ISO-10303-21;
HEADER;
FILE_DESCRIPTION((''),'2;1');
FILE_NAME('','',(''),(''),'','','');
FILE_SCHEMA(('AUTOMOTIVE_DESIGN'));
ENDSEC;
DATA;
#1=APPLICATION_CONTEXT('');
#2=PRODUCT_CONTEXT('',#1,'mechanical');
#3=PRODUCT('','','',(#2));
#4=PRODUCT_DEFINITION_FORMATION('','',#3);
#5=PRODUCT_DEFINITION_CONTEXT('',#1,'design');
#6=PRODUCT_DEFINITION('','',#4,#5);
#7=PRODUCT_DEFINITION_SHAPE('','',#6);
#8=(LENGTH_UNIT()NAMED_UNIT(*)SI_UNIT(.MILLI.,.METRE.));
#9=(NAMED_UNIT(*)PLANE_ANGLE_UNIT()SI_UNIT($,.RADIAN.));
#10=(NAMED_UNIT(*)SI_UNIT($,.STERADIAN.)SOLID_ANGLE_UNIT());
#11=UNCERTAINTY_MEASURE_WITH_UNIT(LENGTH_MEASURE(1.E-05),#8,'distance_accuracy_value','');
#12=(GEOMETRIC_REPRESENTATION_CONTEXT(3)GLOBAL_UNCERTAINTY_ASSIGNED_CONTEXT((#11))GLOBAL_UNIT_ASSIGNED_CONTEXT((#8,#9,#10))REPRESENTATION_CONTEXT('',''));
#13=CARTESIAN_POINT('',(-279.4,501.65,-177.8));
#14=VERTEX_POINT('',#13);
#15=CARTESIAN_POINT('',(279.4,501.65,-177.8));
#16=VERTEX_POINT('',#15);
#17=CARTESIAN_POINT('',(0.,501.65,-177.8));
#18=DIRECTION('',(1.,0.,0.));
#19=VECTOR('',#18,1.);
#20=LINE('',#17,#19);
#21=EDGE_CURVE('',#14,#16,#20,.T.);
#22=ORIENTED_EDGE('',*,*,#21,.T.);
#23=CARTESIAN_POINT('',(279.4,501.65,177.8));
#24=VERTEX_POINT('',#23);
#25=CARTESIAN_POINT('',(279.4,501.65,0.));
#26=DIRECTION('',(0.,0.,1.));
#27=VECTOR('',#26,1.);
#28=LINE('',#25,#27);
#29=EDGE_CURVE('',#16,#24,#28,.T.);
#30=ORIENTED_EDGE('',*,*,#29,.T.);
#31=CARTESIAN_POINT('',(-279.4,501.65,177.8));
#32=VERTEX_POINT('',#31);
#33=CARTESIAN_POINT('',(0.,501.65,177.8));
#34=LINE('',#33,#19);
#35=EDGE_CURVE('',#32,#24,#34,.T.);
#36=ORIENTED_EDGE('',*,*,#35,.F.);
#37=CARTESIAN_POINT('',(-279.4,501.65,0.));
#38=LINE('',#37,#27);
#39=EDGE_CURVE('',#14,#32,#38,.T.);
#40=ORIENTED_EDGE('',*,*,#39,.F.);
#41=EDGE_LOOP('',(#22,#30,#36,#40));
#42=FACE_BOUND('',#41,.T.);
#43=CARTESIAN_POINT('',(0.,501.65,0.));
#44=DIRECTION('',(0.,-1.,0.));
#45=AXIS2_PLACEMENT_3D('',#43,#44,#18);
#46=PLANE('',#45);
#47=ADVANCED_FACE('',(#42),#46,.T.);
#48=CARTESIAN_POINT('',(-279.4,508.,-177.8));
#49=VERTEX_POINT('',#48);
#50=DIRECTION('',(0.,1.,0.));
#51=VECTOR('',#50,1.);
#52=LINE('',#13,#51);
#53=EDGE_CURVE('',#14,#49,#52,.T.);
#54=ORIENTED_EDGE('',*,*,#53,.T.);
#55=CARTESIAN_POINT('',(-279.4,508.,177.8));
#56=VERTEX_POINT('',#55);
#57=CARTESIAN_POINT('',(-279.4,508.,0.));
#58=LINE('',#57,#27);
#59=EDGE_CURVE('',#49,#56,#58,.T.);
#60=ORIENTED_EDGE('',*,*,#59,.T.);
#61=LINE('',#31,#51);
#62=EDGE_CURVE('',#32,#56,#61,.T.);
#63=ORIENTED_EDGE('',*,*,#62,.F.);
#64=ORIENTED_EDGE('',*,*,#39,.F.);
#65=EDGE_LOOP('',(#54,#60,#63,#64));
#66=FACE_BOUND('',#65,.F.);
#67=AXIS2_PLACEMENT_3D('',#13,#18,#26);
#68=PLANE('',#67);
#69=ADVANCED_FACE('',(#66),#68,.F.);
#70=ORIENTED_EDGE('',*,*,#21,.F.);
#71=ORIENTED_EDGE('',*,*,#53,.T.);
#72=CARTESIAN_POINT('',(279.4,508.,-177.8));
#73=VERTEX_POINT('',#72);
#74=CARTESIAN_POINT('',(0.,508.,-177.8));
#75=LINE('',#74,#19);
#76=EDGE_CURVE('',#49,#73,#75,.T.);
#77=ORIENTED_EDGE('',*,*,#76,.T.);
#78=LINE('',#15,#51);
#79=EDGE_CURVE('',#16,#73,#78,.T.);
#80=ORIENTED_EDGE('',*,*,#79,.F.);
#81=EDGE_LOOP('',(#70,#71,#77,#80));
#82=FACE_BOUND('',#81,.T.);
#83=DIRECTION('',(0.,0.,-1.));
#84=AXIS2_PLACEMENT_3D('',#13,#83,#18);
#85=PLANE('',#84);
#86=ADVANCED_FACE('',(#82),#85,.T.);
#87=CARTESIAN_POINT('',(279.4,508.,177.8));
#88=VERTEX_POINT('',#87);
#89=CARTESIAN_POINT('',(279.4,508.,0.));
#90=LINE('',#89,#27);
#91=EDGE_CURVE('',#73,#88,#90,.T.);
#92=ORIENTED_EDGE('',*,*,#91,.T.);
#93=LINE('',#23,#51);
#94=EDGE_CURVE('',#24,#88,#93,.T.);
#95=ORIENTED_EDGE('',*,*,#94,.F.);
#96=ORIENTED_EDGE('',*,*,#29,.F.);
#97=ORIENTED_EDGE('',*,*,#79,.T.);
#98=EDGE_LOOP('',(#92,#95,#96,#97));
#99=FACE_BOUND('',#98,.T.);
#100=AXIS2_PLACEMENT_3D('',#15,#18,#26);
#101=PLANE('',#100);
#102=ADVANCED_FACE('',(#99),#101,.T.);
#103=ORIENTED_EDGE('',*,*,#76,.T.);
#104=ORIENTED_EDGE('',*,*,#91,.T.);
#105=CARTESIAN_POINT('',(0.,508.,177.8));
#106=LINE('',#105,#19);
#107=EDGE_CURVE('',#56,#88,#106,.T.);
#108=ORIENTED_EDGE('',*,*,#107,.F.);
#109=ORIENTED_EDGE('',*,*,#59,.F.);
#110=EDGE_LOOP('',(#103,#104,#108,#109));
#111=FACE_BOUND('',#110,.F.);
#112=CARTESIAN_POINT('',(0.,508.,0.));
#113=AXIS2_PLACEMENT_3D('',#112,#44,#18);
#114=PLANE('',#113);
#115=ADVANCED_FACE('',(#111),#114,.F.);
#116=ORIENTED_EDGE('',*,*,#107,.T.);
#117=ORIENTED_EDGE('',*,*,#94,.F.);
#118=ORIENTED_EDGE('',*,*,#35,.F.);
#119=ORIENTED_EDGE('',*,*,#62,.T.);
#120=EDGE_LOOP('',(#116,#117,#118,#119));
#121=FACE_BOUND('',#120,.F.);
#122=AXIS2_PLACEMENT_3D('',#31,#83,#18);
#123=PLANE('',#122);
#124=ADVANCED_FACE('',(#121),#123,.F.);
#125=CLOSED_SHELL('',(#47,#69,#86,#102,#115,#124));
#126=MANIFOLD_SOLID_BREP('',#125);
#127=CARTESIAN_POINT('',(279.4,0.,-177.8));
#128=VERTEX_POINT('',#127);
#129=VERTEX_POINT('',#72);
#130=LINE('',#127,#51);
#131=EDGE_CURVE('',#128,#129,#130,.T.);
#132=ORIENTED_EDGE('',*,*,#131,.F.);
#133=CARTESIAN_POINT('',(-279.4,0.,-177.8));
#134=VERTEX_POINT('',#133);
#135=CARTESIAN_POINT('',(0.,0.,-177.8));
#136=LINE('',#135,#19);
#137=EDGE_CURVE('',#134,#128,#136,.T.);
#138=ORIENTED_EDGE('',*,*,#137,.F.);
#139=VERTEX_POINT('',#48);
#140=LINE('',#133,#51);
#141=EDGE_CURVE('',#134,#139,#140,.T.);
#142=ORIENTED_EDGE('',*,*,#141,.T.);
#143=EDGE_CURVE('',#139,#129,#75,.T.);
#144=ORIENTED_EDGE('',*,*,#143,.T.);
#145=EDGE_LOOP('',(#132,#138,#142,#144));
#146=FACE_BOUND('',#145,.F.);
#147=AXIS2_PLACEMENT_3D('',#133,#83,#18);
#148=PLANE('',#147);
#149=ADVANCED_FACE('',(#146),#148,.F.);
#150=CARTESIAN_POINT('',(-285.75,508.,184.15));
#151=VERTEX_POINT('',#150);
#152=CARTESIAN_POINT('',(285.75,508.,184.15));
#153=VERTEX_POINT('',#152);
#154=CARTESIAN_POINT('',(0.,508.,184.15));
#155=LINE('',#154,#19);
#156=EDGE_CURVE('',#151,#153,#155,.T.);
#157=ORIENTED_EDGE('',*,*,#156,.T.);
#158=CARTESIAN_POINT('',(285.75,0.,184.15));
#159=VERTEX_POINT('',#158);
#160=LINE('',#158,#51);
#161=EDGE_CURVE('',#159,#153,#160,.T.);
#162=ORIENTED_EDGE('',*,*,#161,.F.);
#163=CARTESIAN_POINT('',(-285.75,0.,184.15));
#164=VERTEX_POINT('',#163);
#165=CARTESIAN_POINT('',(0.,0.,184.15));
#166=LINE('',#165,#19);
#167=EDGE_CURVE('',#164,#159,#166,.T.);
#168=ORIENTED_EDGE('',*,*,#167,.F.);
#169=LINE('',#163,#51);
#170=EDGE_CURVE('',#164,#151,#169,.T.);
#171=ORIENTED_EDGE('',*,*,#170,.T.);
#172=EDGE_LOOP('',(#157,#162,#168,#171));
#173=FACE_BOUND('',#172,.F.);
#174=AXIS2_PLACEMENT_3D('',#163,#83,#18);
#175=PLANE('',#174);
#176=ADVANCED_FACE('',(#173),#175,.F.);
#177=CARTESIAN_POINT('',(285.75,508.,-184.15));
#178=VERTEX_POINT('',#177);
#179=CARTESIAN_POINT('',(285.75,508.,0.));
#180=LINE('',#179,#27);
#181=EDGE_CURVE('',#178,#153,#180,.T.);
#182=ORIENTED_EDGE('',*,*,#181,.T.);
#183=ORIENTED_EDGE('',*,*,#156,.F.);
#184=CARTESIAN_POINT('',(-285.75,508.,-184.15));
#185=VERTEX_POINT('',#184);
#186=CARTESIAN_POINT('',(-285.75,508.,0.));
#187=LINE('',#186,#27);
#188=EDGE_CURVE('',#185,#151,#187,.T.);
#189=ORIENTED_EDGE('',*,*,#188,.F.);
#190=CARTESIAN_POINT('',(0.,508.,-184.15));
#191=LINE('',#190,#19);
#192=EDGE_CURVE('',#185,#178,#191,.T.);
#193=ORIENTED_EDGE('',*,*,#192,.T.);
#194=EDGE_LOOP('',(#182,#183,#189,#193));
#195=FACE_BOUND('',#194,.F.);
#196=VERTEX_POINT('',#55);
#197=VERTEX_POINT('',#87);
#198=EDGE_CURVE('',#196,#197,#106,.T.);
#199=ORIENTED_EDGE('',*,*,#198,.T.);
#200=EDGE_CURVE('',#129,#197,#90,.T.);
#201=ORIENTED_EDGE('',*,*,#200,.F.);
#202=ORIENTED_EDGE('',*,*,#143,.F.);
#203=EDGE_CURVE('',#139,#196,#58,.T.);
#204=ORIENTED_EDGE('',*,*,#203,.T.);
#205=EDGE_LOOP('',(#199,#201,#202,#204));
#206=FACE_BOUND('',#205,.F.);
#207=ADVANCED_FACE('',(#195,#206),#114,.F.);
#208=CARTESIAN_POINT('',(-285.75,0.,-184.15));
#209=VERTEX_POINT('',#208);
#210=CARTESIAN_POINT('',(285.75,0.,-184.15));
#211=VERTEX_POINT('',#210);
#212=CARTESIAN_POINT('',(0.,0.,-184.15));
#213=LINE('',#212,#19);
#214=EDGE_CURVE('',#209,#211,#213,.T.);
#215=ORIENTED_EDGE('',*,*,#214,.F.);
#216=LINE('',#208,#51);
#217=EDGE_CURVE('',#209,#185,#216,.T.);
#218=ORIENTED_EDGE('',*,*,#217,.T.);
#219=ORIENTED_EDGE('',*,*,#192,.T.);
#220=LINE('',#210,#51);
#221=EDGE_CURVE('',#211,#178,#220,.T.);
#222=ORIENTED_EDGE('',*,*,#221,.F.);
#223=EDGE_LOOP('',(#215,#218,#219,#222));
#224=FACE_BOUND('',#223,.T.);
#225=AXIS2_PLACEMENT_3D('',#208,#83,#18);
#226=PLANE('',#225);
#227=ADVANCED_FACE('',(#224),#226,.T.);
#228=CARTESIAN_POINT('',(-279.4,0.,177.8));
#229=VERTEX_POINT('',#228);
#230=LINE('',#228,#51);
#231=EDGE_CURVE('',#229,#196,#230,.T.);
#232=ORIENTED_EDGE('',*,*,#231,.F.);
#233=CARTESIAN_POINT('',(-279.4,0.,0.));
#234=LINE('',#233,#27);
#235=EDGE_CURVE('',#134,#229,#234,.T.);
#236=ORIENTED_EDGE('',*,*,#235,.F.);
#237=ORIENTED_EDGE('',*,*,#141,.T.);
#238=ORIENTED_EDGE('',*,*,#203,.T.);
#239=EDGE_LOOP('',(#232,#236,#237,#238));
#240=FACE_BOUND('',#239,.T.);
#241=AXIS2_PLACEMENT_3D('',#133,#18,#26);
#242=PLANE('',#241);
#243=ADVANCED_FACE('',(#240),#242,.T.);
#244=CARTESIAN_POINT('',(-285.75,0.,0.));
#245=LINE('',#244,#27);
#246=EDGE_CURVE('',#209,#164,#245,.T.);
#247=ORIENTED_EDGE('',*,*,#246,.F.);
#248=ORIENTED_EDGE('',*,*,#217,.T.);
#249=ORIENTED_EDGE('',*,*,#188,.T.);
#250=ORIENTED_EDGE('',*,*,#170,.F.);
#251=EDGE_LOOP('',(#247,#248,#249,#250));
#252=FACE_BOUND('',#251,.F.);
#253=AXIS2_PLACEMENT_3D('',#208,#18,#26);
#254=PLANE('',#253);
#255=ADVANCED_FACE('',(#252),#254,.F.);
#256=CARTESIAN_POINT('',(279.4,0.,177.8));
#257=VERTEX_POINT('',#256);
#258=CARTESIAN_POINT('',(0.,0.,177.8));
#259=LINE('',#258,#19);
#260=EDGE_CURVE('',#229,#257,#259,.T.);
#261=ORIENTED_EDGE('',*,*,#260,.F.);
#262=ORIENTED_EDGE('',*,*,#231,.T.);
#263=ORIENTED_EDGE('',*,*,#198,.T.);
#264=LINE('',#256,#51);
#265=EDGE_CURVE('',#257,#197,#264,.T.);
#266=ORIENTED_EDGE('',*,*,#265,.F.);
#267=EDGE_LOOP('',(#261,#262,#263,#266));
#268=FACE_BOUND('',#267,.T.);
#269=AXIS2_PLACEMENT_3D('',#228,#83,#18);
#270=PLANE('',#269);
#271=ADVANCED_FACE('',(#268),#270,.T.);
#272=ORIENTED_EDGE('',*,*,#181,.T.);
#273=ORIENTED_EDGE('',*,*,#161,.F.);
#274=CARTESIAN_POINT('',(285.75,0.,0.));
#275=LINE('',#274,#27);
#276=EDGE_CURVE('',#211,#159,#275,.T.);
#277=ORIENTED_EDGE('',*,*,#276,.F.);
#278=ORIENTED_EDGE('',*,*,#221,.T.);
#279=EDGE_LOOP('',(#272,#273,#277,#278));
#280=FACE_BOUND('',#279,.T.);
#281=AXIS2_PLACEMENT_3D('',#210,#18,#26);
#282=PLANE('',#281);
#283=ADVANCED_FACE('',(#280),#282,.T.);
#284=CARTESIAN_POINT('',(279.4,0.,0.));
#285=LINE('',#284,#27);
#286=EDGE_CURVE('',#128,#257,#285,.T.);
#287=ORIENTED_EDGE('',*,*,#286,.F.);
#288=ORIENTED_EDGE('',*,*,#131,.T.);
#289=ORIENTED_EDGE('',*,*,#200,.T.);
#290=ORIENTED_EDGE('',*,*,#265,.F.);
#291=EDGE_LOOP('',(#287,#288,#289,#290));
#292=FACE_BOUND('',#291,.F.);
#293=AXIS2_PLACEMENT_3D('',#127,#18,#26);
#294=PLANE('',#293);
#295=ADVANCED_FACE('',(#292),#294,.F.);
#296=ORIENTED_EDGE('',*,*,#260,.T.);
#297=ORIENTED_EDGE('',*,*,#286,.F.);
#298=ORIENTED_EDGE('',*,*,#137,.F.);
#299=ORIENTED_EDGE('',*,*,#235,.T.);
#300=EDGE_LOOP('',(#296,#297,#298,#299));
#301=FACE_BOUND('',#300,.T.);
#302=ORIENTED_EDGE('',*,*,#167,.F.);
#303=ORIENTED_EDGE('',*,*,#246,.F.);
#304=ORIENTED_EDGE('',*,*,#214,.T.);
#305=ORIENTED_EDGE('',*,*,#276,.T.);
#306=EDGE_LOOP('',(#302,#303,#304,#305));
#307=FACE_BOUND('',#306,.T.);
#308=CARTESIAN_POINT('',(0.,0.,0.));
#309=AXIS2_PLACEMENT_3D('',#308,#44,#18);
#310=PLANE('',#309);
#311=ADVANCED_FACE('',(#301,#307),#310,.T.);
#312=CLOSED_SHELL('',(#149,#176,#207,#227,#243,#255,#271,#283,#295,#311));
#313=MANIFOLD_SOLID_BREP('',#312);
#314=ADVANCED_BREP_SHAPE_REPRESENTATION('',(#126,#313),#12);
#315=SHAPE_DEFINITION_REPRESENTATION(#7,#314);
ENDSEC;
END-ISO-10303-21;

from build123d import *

# Parameters (mm, degrees)
F0_W     = 571.5
F0_H     = 368.3
F0_W_2   = 558.8
F0_H_2   = 355.6
F1_DEPTH = 508
F2_START = -501.65
F2_DEPTH = 6.35


with BuildPart() as f1:
    # F0 (on Front) → F1 (new body)
    with BuildSketch(Plane.XZ):
        Rectangle(F0_W, F0_H)
        Rectangle(F0_W_2, F0_H_2, mode=Mode.SUBTRACT)
    extrude(amount=-F1_DEPTH)


with BuildPart() as f2:
    # F0 (on Front) → F2 (new body)
    with BuildSketch(Plane.XZ.offset(F2_START)):
        Rectangle(F0_W_2, F0_H_2)
    extrude(amount=-F2_DEPTH)


solid = Compound([f1.part, f2.part])
